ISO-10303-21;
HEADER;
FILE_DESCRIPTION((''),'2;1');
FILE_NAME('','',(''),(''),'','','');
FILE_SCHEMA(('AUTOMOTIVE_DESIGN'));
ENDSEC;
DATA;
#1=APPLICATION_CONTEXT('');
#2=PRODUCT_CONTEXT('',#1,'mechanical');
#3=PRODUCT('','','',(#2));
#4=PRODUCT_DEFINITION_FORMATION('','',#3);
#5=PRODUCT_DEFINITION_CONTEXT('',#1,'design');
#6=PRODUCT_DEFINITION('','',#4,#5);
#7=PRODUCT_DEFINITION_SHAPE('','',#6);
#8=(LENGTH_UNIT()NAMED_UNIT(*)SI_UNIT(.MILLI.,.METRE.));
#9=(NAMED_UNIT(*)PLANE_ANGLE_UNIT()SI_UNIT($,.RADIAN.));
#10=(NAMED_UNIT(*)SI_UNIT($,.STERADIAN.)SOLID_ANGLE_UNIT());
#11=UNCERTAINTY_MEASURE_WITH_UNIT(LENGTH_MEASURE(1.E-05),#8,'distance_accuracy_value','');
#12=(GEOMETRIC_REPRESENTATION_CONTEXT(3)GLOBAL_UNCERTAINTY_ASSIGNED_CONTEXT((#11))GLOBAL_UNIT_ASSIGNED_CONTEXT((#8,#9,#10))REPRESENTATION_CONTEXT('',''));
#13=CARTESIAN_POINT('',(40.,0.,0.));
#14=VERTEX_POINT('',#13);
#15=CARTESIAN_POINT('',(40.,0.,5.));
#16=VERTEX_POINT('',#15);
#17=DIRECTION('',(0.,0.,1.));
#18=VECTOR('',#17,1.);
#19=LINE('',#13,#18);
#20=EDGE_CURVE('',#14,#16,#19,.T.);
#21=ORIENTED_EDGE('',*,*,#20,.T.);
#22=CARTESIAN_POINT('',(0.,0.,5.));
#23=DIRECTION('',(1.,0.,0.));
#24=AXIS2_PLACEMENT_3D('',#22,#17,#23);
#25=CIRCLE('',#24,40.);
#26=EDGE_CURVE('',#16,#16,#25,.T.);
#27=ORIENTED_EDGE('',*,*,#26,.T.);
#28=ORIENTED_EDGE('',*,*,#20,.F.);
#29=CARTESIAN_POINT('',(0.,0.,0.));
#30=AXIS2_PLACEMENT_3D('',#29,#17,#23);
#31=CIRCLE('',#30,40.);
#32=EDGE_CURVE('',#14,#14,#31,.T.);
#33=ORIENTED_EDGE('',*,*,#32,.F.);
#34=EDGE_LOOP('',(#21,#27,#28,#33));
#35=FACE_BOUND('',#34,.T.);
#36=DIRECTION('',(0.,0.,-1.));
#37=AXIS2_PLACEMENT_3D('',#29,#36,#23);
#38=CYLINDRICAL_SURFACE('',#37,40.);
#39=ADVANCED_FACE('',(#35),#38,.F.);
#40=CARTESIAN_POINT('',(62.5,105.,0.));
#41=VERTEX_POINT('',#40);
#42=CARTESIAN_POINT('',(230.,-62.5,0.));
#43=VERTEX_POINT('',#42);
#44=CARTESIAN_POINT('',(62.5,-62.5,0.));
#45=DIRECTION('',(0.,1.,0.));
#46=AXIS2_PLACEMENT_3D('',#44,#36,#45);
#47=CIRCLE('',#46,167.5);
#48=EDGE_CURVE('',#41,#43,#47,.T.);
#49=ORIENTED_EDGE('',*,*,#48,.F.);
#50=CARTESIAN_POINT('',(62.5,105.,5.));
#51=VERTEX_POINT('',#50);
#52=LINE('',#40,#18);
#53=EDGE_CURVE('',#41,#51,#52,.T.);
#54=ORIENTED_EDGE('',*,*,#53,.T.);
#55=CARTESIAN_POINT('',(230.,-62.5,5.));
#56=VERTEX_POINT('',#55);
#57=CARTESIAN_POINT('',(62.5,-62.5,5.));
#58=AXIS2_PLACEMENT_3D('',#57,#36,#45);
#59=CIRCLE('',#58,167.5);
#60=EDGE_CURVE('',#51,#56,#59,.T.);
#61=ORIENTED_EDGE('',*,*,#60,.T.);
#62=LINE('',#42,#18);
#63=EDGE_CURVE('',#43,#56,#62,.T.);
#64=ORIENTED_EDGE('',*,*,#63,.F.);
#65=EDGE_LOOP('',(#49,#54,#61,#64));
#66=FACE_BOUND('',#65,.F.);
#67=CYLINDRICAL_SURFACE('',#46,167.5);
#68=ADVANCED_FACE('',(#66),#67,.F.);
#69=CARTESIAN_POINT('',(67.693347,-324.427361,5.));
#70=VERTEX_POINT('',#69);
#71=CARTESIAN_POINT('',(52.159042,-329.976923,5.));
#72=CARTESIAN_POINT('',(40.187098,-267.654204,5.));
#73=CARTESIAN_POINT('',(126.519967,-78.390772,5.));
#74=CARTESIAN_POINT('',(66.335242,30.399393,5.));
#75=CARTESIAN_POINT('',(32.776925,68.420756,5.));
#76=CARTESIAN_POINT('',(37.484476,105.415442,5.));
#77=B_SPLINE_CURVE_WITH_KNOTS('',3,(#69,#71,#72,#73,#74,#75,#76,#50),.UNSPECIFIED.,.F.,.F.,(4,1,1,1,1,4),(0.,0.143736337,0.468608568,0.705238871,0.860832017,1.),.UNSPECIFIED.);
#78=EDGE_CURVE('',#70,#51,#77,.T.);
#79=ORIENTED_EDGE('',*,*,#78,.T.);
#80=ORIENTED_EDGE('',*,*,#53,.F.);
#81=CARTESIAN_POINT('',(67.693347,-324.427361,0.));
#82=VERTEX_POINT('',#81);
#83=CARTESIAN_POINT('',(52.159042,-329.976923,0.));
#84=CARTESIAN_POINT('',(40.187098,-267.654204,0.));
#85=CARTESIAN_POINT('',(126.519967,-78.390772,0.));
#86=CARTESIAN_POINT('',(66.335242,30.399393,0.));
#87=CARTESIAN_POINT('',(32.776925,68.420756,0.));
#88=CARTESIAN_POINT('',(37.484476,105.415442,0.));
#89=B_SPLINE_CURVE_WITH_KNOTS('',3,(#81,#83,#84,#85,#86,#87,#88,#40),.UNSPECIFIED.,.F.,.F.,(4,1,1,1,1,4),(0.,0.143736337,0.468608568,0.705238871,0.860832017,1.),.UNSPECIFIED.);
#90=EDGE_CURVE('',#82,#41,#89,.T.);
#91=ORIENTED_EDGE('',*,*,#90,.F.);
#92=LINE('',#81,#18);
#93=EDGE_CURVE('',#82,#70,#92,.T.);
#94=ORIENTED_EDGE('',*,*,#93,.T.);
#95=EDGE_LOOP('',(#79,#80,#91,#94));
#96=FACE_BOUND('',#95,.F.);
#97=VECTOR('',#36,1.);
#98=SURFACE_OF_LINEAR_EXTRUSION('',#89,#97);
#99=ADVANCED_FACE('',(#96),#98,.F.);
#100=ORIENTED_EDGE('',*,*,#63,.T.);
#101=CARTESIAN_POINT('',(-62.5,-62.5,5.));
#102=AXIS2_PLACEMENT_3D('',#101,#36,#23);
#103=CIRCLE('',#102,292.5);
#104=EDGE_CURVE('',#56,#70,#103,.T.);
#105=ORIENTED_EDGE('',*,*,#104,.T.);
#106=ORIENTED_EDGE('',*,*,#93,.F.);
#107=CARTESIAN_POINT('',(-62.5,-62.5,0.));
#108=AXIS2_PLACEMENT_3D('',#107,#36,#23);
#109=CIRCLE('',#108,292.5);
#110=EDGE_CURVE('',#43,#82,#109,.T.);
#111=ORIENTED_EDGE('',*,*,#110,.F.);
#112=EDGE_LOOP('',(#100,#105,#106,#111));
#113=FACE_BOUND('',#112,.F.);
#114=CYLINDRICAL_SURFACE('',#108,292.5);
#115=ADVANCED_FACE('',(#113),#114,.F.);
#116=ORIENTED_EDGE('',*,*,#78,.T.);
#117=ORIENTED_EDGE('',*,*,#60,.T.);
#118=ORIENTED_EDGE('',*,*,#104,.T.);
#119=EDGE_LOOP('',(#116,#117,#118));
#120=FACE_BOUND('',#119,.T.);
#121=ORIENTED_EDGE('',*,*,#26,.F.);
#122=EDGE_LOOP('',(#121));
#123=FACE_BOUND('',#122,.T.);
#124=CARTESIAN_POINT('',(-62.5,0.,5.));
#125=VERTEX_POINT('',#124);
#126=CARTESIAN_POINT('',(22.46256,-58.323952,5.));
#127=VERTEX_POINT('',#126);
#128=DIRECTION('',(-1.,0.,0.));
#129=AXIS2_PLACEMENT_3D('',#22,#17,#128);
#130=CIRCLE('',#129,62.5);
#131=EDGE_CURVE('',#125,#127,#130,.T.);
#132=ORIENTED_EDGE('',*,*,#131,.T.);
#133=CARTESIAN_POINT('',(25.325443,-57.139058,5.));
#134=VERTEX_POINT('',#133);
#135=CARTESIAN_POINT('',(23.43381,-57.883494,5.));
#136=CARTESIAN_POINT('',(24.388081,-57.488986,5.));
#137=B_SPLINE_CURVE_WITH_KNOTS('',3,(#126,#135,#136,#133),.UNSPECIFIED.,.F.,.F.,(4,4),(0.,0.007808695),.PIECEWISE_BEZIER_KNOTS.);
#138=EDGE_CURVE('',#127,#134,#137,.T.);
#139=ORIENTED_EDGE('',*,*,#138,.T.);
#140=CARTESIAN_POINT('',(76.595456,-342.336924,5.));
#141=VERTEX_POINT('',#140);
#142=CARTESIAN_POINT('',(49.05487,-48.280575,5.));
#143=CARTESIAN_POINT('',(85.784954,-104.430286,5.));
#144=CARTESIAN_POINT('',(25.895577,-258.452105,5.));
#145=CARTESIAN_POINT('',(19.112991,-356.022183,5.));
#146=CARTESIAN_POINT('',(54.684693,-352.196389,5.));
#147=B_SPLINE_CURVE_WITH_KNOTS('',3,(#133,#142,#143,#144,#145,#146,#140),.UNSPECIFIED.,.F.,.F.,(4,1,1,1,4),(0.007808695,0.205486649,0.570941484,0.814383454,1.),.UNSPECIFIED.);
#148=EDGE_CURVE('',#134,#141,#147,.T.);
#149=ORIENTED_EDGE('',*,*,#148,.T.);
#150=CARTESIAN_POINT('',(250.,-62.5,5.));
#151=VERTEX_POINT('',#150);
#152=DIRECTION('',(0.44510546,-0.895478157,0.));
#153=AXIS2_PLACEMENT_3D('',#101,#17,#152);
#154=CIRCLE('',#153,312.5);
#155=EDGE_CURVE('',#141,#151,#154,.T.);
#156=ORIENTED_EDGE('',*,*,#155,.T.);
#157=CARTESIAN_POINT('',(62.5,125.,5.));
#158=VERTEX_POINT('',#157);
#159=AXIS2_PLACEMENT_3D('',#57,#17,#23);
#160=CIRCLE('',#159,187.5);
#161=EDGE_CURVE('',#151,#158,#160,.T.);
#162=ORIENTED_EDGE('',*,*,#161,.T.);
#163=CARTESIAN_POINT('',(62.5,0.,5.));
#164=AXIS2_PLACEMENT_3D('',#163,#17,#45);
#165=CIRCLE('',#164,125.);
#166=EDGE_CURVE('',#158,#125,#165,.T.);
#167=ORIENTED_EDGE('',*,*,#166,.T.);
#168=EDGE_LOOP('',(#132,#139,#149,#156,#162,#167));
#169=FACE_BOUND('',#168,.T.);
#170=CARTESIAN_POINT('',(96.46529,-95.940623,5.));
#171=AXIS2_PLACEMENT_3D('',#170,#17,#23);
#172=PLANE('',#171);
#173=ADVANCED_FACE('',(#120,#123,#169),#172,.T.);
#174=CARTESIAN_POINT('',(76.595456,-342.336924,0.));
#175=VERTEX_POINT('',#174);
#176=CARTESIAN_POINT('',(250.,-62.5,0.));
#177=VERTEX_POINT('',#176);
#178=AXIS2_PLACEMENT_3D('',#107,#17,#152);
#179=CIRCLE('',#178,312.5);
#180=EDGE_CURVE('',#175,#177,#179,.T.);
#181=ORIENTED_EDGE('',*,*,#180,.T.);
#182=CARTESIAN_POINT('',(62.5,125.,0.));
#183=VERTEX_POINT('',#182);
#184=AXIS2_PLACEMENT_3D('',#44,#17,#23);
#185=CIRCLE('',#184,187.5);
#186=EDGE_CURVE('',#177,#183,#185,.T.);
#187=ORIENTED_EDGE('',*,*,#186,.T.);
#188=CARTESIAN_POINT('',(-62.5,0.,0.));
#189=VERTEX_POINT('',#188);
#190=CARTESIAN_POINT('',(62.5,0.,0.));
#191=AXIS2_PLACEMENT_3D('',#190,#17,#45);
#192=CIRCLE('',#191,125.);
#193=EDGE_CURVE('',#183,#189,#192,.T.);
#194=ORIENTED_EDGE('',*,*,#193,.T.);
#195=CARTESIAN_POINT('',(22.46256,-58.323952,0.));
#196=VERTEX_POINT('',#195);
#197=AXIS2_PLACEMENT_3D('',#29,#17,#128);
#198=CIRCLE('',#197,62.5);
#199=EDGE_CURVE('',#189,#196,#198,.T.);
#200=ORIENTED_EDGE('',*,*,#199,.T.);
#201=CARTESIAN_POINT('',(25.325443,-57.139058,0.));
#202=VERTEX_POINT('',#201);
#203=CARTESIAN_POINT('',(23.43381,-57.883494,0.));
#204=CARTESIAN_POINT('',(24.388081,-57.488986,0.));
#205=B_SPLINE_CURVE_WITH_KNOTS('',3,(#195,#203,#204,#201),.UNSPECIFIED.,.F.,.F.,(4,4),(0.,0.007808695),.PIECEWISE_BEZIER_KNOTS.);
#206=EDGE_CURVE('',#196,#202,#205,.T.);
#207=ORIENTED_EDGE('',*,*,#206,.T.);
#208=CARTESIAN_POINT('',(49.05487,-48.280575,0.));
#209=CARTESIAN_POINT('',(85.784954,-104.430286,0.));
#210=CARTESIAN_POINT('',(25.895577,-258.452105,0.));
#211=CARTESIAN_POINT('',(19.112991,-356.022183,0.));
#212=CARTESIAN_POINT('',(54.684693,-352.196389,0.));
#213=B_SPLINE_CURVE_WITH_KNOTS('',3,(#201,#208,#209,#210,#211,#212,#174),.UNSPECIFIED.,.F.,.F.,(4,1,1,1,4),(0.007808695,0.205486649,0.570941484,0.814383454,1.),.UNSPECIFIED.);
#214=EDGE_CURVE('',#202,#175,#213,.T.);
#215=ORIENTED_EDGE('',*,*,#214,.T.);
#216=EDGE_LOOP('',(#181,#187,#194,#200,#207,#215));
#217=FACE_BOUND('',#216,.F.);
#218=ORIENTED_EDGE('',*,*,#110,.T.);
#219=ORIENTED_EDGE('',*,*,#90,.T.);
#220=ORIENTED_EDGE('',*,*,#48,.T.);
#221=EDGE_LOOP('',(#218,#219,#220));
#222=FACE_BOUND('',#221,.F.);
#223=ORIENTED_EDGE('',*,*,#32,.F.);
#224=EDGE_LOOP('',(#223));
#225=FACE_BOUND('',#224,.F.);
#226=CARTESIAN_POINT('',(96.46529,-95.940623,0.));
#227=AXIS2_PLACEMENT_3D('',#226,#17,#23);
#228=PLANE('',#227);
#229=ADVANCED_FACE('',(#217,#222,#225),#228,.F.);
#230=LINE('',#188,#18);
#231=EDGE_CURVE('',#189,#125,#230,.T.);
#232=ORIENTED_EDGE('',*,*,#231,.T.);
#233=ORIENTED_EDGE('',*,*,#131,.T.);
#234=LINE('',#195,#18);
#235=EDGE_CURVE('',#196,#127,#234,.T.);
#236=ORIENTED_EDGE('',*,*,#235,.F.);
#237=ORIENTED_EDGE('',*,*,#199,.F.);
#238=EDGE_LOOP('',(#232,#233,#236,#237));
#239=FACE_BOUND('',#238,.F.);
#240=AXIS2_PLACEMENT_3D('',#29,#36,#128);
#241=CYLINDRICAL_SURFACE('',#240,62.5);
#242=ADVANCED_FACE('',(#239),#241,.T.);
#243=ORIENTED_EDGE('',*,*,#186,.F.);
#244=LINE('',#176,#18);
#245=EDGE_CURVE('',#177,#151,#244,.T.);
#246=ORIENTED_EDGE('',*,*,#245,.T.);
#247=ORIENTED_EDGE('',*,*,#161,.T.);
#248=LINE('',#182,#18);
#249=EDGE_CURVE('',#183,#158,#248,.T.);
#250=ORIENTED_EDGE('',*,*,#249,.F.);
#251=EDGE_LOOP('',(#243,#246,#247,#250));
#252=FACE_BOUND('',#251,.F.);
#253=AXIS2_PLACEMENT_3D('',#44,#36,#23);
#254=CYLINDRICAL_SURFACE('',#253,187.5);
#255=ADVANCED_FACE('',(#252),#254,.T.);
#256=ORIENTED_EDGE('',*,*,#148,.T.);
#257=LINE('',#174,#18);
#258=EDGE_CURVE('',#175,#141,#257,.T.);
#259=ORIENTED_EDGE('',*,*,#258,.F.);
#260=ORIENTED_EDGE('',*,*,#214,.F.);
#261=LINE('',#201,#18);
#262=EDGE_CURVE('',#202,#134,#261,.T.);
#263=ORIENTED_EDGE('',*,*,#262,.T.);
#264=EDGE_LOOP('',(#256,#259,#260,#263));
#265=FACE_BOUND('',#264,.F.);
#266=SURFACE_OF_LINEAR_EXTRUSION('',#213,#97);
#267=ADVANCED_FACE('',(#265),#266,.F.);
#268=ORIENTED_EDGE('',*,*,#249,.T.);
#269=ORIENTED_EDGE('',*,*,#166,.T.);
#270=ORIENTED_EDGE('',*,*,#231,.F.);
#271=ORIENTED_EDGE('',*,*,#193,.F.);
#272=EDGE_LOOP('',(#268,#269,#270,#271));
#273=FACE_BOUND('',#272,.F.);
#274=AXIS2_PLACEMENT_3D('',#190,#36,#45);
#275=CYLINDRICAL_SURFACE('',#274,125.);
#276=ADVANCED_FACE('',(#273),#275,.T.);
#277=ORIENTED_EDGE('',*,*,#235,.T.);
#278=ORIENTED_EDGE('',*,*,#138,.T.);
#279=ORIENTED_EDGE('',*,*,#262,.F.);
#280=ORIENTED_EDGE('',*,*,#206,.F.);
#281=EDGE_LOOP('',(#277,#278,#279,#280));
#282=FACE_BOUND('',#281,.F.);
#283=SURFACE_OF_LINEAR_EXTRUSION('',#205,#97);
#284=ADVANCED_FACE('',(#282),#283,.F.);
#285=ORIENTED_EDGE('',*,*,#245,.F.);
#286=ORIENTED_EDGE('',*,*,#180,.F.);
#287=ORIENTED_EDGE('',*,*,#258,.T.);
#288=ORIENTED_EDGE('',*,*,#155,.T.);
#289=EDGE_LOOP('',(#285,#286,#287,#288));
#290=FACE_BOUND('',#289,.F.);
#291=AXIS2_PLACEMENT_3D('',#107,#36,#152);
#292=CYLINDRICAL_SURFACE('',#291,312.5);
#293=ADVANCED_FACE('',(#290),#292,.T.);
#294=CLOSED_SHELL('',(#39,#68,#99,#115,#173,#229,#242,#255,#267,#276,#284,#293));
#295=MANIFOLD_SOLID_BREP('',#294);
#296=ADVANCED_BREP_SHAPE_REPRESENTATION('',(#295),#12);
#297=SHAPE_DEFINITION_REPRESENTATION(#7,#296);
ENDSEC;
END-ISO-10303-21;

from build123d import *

# Parameters (mm, degrees)
F0_R     = 40
F1_DEPTH = 5


with BuildPart() as f1:
    # F0 (on Top) → F1 (new body)
    with BuildSketch(Plane.XY):
        with BuildLine():
            ThreePointArc((62.5, 125), (-25.8883476483, 88.3883476483), (-62.5, 0))
            ThreePointArc((-62.5, 0), (-35.3718816601, -51.5274682847), (22.4625596104, -58.3239523331))
            add(Edge.make_bspline(
                [(22.4625596104, -58.3239523331), (23.4338104217, -57.8834943524), (24.3880812611, -57.4889863625), (25.3254434787, -57.1390576804)],
                knots=[0, 0, 0, 0, 0.0078086947, 0.0078086947, 0.0078086947, 0.0078086947], degree=3))
            add(Edge.make_bspline(
                [(25.3254434787, -57.1390576804), (49.0548698892, -48.2805750634), (85.7849542145, -104.4302855165), (25.8955771825, -258.4521048553), (19.1129913649, -356.0221825551), (54.6846931143, -352.1963888275), (76.5954563413, -342.3369239847)],
                knots=[0.0078086947, 0.0078086947, 0.0078086947, 0.0078086947, 0.2054866489, 0.5709414839, 0.8143834536, 1, 1, 1, 1], degree=3))
            ThreePointArc((76.5954563413, -342.3369239847), (203.1346928647, -227.1039487578), (250, -62.5))
            ThreePointArc((250, -62.5), (195.0825214725, 70.0825214725), (62.5, 125))
        make_face()
        Circle(F0_R, mode=Mode.SUBTRACT)
        with BuildLine():
            ThreePointArc((62.5, 105), (180.9403858487, 55.9403858487), (230, -62.5))
            ThreePointArc((230, -62.5), (186.1340725214, -216.5692960373), (67.6933471355, -324.4273608496))
            add(Edge.make_bspline(
                [(67.6933471355, -324.4273608496), (52.1590419089, -329.9769233014), (40.1870983678, -267.654203975), (126.5199671093, -78.3907724821), (66.3352424241, 30.3993926076), (32.7769246578, 68.4207557353), (37.4844764475, 105.4154422107), (62.5, 105)],
                knots=[0, 0, 0, 0, 0.1437363374, 0.4686085678, 0.7052388709, 0.8608320173, 1, 1, 1, 1], degree=3))
        make_face(mode=Mode.SUBTRACT)
    extrude(amount=F1_DEPTH)


solid = f1.part
